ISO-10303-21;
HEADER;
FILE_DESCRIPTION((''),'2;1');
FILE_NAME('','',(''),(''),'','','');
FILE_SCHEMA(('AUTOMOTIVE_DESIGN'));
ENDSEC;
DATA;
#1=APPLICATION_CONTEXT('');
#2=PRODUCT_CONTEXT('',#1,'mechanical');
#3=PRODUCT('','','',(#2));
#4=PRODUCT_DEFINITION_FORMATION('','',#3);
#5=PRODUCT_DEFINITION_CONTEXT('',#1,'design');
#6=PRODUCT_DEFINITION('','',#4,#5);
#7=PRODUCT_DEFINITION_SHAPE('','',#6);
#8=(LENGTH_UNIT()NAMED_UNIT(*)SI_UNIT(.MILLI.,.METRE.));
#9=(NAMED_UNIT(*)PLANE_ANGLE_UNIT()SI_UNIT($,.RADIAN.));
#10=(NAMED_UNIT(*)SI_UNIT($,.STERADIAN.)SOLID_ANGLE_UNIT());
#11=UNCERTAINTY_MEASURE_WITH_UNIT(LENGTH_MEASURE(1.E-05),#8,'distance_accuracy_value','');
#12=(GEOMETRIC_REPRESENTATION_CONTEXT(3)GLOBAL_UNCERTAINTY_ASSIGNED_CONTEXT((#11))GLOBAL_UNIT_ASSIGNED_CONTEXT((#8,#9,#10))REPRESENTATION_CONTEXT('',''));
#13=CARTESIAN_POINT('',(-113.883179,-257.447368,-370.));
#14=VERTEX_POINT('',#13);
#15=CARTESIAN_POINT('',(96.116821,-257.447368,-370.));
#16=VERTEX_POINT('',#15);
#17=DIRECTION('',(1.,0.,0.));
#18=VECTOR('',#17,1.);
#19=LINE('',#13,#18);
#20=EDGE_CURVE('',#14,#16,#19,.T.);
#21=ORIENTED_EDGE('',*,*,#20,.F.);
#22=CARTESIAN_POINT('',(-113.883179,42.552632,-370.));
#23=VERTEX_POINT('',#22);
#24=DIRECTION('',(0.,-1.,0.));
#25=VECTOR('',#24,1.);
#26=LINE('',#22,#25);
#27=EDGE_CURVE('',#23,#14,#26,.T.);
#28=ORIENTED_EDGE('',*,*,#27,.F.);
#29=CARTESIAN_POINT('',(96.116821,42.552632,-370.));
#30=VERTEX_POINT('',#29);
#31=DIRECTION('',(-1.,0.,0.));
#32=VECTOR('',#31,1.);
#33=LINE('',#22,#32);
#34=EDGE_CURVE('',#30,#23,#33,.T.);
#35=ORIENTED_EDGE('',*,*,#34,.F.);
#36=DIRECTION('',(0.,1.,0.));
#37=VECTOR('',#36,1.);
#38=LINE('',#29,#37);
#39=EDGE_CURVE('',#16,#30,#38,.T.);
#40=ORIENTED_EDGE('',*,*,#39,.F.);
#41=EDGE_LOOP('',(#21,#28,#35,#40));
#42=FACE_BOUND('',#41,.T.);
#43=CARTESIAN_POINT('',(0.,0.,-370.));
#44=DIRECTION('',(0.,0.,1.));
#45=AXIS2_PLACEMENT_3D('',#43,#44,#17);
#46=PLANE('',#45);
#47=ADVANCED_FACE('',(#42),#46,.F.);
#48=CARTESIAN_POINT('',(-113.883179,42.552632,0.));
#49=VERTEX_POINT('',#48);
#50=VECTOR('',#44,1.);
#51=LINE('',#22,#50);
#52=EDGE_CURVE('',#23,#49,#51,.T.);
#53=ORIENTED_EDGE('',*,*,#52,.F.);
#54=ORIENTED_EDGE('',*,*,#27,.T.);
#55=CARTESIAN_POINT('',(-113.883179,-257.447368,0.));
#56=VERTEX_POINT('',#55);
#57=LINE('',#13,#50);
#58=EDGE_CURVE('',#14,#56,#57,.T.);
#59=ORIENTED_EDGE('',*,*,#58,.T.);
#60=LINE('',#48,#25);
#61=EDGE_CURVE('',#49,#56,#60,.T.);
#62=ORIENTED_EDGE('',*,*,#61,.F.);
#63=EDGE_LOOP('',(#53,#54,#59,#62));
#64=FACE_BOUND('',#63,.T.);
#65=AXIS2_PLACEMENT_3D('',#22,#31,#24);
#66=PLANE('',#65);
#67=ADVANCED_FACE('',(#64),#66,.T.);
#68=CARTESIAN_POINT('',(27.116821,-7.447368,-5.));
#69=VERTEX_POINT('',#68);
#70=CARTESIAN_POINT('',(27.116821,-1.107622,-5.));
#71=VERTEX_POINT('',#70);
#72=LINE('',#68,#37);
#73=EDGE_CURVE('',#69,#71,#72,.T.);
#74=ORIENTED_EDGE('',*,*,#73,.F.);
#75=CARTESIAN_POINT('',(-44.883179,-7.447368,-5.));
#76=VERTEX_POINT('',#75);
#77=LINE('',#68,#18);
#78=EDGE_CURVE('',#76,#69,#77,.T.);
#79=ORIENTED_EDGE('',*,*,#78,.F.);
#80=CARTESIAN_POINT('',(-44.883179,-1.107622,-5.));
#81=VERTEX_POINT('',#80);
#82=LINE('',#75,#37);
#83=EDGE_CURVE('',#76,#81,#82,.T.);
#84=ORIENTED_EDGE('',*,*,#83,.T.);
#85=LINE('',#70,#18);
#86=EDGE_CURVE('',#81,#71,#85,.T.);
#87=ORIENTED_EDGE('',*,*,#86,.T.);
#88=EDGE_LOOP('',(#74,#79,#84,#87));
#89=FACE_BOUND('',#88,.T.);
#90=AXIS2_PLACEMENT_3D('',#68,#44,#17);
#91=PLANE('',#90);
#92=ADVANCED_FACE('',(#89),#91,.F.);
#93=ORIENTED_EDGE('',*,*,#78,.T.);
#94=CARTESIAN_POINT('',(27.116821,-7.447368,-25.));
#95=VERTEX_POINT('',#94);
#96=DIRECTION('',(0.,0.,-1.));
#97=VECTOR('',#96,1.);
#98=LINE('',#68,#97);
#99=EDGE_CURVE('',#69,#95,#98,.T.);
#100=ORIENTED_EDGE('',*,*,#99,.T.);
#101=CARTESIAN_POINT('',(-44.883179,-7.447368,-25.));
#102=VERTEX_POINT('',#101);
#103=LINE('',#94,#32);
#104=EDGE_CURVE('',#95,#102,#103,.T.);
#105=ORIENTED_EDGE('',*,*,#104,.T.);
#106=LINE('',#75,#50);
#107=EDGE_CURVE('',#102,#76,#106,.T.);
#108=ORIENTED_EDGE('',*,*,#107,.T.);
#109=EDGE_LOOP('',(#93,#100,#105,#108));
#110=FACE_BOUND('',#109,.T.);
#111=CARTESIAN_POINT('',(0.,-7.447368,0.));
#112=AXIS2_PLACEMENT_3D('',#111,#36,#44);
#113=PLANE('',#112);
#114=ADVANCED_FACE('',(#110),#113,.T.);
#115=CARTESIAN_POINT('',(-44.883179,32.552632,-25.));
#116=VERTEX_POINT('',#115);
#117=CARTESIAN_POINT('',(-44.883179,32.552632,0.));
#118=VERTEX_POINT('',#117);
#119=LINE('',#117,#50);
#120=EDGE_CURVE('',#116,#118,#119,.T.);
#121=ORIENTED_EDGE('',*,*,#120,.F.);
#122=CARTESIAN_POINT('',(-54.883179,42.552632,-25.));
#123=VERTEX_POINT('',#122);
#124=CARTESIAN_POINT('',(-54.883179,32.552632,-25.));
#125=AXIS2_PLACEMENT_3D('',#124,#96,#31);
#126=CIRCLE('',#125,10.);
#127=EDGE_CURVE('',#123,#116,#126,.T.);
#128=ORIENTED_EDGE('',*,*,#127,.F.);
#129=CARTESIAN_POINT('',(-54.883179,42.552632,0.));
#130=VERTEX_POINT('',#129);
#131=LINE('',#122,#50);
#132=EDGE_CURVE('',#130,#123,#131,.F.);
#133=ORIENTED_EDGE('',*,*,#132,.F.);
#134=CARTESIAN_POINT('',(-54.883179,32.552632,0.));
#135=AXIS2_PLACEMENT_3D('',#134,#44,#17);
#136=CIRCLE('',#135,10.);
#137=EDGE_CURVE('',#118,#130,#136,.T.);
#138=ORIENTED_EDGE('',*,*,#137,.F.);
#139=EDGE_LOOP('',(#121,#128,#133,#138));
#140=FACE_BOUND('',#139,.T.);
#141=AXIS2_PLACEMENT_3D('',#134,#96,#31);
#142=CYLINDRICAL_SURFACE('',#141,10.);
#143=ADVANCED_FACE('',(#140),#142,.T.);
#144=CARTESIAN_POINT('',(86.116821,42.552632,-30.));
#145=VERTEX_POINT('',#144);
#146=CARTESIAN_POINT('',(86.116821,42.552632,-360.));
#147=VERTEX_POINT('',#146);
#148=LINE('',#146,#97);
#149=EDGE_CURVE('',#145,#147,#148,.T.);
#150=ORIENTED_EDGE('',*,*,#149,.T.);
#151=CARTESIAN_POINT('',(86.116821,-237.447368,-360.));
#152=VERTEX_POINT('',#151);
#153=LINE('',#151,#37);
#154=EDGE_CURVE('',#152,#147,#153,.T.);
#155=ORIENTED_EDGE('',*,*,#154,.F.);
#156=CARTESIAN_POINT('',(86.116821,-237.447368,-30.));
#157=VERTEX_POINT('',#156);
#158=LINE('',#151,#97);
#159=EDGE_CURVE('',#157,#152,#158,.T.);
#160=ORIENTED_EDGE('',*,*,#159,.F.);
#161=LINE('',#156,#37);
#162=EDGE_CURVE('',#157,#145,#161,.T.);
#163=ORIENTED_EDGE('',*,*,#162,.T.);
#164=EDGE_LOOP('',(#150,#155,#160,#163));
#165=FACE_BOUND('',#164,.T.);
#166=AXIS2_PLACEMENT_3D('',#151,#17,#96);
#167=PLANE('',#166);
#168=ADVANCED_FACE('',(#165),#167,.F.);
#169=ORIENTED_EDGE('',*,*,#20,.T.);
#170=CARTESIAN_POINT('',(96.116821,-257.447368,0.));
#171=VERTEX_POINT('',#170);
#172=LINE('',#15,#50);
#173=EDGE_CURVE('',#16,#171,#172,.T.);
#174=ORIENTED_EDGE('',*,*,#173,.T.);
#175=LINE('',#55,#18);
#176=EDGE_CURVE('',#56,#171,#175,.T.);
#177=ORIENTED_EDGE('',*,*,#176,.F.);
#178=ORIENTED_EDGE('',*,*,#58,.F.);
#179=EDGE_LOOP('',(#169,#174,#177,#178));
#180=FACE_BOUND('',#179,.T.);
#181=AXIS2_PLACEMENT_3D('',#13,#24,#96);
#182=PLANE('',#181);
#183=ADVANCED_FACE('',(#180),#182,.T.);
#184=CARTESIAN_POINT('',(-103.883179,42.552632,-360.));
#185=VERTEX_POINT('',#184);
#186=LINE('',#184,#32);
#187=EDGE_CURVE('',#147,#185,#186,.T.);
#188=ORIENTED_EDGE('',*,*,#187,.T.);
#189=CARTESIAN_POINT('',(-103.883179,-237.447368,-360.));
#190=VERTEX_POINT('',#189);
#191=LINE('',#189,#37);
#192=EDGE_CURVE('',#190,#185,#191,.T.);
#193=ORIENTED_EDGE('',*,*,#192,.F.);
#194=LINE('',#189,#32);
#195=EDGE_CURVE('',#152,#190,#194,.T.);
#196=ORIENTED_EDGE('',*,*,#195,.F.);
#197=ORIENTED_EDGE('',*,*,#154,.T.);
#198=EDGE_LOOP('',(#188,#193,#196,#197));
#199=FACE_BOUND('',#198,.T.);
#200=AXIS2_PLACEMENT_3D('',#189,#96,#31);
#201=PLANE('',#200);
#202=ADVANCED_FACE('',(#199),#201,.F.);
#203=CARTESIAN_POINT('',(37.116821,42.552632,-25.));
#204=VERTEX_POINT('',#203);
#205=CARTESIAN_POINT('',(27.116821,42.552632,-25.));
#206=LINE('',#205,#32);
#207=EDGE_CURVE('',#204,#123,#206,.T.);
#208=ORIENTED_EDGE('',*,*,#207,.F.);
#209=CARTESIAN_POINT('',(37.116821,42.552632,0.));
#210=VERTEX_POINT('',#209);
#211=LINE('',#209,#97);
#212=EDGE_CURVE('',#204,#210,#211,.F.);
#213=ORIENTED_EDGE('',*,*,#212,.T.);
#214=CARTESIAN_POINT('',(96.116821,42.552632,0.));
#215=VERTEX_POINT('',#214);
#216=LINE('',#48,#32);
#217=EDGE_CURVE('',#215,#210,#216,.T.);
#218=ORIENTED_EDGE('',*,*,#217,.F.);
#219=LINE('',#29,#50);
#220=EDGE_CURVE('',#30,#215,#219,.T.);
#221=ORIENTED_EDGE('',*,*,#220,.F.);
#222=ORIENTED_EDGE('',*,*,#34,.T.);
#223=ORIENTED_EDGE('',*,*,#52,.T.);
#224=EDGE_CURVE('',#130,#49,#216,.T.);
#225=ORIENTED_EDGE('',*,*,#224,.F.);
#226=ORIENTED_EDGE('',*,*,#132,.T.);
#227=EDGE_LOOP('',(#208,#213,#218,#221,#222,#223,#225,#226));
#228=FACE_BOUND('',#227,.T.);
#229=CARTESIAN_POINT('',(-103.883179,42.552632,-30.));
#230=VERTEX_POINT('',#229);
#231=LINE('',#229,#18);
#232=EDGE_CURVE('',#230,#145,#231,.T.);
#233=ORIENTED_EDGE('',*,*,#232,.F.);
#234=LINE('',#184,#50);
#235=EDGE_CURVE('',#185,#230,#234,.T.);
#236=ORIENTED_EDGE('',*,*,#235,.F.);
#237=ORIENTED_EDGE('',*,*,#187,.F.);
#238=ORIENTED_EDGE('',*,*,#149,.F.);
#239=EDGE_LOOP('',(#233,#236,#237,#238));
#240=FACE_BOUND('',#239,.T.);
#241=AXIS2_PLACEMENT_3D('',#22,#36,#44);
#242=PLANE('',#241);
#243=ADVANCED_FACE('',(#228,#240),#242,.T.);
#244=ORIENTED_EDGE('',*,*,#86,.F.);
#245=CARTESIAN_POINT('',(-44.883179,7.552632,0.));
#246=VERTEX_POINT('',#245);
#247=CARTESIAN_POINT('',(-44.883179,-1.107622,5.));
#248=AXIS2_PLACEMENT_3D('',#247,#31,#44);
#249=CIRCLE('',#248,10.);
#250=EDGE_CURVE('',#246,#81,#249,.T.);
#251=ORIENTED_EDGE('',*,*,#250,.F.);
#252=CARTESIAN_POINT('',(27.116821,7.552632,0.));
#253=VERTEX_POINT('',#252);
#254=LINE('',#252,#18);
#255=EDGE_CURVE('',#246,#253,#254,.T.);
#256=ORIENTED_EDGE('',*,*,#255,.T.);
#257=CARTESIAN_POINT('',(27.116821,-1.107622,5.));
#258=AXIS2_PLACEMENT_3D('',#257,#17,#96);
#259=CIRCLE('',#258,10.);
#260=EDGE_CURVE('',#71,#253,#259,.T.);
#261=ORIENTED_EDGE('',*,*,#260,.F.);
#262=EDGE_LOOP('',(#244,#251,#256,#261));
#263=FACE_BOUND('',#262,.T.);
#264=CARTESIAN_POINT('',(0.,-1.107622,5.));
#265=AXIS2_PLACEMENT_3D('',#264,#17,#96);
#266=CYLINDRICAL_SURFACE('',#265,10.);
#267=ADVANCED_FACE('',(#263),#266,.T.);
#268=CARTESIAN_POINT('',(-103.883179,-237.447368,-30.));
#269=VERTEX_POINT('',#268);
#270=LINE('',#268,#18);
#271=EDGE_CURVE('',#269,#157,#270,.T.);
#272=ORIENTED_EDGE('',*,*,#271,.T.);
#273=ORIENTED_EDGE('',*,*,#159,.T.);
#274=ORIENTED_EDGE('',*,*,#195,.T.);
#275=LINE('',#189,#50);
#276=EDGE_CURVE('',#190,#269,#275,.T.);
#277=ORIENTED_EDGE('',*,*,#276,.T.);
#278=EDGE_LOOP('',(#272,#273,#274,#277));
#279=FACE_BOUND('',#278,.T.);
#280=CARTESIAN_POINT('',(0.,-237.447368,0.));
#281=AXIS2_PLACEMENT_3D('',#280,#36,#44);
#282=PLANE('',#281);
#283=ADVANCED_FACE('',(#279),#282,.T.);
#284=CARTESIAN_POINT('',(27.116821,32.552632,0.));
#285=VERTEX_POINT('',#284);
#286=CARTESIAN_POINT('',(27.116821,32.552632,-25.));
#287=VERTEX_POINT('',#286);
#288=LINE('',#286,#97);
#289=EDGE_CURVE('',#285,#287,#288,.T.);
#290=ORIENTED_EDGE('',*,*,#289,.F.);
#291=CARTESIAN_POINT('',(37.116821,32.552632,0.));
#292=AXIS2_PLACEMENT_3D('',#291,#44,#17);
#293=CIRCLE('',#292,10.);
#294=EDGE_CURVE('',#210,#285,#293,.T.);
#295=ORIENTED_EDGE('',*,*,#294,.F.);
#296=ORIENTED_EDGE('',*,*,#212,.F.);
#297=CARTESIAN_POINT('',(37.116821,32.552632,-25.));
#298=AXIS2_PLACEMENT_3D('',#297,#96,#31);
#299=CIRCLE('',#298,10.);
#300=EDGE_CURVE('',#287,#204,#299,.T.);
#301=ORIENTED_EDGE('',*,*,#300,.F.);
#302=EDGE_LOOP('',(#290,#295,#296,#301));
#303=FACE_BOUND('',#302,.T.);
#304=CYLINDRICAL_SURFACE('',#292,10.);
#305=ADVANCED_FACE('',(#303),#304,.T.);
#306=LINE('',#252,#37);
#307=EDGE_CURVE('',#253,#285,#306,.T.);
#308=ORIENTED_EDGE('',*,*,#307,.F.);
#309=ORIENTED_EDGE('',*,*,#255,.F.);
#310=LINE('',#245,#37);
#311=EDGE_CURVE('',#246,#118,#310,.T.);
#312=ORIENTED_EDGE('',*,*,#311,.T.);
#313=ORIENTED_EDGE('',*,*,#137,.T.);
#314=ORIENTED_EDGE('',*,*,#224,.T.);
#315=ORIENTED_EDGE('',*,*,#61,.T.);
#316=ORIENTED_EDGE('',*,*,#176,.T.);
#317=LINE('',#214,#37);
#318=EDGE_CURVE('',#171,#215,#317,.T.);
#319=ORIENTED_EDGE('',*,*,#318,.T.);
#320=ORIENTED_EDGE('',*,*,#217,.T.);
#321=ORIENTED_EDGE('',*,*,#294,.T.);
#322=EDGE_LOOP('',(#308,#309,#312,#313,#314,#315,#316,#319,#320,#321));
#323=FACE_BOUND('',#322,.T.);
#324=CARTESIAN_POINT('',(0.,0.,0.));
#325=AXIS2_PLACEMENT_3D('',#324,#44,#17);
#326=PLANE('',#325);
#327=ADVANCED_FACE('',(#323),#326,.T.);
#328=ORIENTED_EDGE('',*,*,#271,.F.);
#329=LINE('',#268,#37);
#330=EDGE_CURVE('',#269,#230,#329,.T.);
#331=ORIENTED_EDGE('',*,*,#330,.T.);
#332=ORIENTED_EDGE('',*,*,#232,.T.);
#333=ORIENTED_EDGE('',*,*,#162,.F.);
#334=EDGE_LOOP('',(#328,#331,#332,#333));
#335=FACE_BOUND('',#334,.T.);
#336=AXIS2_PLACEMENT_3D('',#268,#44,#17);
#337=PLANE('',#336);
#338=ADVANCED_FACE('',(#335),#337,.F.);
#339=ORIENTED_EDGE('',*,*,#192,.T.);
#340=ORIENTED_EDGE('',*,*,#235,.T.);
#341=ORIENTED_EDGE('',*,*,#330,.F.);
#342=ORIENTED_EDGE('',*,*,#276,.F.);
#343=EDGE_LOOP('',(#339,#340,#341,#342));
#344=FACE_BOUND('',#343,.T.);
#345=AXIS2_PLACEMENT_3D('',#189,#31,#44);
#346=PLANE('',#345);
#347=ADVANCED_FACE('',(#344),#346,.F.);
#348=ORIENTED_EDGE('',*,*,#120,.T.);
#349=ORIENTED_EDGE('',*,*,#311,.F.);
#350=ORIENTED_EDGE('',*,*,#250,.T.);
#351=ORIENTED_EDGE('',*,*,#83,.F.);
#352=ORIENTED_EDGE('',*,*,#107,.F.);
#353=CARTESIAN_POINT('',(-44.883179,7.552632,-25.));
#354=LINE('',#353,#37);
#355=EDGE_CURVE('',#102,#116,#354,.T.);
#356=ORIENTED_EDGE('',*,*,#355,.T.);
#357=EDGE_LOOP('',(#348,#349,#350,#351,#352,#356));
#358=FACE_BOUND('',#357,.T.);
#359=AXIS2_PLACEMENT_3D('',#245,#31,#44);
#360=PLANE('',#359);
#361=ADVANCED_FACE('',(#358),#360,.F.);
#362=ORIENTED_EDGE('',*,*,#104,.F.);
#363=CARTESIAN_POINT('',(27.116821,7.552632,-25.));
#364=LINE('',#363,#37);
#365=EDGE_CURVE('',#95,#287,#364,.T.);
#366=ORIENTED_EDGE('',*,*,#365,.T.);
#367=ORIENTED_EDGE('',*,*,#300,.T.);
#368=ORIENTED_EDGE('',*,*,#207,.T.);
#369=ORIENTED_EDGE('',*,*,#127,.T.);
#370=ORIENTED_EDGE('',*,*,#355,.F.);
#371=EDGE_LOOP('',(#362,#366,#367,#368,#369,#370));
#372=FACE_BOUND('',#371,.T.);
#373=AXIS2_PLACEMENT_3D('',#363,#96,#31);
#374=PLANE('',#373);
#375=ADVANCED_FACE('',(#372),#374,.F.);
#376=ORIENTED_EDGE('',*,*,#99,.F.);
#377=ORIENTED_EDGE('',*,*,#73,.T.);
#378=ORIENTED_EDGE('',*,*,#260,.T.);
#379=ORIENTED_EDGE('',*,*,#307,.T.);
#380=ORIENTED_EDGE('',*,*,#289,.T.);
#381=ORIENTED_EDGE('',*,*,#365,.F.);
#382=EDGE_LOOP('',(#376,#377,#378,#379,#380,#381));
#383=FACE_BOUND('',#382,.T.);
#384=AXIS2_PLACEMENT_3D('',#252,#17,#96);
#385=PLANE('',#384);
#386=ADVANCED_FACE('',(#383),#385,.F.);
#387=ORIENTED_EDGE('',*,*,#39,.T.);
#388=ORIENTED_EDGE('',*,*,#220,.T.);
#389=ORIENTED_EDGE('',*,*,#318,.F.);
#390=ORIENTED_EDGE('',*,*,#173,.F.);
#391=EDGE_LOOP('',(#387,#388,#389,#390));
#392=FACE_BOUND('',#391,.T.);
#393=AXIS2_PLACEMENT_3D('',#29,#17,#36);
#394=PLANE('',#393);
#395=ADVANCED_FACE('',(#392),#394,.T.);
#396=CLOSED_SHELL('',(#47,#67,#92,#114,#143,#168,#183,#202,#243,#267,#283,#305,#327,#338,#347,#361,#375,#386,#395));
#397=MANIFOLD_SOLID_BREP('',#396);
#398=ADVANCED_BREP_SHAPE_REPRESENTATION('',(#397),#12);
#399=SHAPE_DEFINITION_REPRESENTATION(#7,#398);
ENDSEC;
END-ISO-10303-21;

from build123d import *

# Parameters (mm, degrees)
ESQUISSE1_W             = 210
ESQUISSE1_H             = 300
BOSS_EXTRU_1_DEPTH      = 370
ESQUISSE2_W             = 190
ESQUISSE2_H             = 330
ENL_V_MAT_EXTRU_1_DEPTH = 280
ESQUISSE5_W             = 72
ESQUISSE5_H             = 25
ENL_V_MAT_EXTRU_4_DEPTH = 35
ESQUISSE6_W             = 72
ESQUISSE6_H             = 20
ENL_V_MAT_EXTRU_5_DEPTH = 15
CONG_5_R                = 10
CONG_6_R                = 10
CONG_7_R                = 10


with BuildPart() as part:
    # Esquisse1 → Boss.-Extru.1 (new body)
    with BuildSketch(Plane.XY):
        with Locations((-8.883179232, -107.447368421)):
            Rectangle(ESQUISSE1_W, ESQUISSE1_H)
    extrude(amount=-BOSS_EXTRU_1_DEPTH)

    # Esquisse2 → Enlèv. mat.-Extru.1 (cut)
    with BuildSketch(Plane(origin=(0, 42.552631579, 0), x_dir=(1, 0, 0), z_dir=(0, 1, 0))):
        with Locations((-8.883179232, 195)):
            Rectangle(ESQUISSE2_W, ESQUISSE2_H)
    extrude(amount=-ENL_V_MAT_EXTRU_1_DEPTH, mode=Mode.SUBTRACT)

    # Esquisse5 → Enlèv. mat.-Extru.4 (cut)
    with BuildSketch(Plane(origin=(0, 42.552631579, 0), x_dir=(1, 0, 0), z_dir=(0, 1, 0))):
        with Locations((-8.883179232, 12.5)):
            Rectangle(ESQUISSE5_W, ESQUISSE5_H)
    extrude(amount=-ENL_V_MAT_EXTRU_4_DEPTH, mode=Mode.SUBTRACT)

    # Esquisse6 → Enlèv. mat.-Extru.5 (cut)
    with BuildSketch(Plane(origin=(0, 7.552631579, 0), x_dir=(1, 0, 0), z_dir=(0, 1, 0))):
        with Locations((-8.883179232, 15)):
            Rectangle(ESQUISSE6_W, ESQUISSE6_H)
    extrude(amount=-ENL_V_MAT_EXTRU_5_DEPTH, mode=Mode.SUBTRACT)

    # Congé5
    cong_5_edges = [part.edges().sort_by_distance(p)[0] for p in [
        (27.116820768, 42.552631579, -12.5),
    ]]
    fillet(cong_5_edges, radius=CONG_5_R)

    # Congé6
    cong_6_edges = [part.edges().sort_by_distance(p)[0] for p in [
        (-44.883179232, 42.552631579, -12.5),
    ]]
    fillet(cong_6_edges, radius=CONG_6_R)

    # Congé7
    # the kernel refuses this fillet: 10 mm, written as the material it takes off along each edge
    with BuildSketch(Plane(origin=(27.116820768, 7.552631579, -5), x_dir=(0, -1, 0), z_dir=(-1, 0, 0))) as cong_7_piece_1:
        with BuildLine():
            CenterArc((8.660254038, 10), CONG_7_R, 210, 60)
            Line((0, 5), (-0.173205081, 4.9))
            ThreePointArc((-0.173205081, 4.9), (-0.2, 2.5), (-0.2, 0))
            Line((-0.2, 0), (0, -0.2))
            Line((0, -0.2), (8.660254038, -0.2))
            Line((8.660254038, -0.2), (8.660254038, 0))
        make_face()
    extrude(amount=72, mode=Mode.SUBTRACT)


solid = part.part
